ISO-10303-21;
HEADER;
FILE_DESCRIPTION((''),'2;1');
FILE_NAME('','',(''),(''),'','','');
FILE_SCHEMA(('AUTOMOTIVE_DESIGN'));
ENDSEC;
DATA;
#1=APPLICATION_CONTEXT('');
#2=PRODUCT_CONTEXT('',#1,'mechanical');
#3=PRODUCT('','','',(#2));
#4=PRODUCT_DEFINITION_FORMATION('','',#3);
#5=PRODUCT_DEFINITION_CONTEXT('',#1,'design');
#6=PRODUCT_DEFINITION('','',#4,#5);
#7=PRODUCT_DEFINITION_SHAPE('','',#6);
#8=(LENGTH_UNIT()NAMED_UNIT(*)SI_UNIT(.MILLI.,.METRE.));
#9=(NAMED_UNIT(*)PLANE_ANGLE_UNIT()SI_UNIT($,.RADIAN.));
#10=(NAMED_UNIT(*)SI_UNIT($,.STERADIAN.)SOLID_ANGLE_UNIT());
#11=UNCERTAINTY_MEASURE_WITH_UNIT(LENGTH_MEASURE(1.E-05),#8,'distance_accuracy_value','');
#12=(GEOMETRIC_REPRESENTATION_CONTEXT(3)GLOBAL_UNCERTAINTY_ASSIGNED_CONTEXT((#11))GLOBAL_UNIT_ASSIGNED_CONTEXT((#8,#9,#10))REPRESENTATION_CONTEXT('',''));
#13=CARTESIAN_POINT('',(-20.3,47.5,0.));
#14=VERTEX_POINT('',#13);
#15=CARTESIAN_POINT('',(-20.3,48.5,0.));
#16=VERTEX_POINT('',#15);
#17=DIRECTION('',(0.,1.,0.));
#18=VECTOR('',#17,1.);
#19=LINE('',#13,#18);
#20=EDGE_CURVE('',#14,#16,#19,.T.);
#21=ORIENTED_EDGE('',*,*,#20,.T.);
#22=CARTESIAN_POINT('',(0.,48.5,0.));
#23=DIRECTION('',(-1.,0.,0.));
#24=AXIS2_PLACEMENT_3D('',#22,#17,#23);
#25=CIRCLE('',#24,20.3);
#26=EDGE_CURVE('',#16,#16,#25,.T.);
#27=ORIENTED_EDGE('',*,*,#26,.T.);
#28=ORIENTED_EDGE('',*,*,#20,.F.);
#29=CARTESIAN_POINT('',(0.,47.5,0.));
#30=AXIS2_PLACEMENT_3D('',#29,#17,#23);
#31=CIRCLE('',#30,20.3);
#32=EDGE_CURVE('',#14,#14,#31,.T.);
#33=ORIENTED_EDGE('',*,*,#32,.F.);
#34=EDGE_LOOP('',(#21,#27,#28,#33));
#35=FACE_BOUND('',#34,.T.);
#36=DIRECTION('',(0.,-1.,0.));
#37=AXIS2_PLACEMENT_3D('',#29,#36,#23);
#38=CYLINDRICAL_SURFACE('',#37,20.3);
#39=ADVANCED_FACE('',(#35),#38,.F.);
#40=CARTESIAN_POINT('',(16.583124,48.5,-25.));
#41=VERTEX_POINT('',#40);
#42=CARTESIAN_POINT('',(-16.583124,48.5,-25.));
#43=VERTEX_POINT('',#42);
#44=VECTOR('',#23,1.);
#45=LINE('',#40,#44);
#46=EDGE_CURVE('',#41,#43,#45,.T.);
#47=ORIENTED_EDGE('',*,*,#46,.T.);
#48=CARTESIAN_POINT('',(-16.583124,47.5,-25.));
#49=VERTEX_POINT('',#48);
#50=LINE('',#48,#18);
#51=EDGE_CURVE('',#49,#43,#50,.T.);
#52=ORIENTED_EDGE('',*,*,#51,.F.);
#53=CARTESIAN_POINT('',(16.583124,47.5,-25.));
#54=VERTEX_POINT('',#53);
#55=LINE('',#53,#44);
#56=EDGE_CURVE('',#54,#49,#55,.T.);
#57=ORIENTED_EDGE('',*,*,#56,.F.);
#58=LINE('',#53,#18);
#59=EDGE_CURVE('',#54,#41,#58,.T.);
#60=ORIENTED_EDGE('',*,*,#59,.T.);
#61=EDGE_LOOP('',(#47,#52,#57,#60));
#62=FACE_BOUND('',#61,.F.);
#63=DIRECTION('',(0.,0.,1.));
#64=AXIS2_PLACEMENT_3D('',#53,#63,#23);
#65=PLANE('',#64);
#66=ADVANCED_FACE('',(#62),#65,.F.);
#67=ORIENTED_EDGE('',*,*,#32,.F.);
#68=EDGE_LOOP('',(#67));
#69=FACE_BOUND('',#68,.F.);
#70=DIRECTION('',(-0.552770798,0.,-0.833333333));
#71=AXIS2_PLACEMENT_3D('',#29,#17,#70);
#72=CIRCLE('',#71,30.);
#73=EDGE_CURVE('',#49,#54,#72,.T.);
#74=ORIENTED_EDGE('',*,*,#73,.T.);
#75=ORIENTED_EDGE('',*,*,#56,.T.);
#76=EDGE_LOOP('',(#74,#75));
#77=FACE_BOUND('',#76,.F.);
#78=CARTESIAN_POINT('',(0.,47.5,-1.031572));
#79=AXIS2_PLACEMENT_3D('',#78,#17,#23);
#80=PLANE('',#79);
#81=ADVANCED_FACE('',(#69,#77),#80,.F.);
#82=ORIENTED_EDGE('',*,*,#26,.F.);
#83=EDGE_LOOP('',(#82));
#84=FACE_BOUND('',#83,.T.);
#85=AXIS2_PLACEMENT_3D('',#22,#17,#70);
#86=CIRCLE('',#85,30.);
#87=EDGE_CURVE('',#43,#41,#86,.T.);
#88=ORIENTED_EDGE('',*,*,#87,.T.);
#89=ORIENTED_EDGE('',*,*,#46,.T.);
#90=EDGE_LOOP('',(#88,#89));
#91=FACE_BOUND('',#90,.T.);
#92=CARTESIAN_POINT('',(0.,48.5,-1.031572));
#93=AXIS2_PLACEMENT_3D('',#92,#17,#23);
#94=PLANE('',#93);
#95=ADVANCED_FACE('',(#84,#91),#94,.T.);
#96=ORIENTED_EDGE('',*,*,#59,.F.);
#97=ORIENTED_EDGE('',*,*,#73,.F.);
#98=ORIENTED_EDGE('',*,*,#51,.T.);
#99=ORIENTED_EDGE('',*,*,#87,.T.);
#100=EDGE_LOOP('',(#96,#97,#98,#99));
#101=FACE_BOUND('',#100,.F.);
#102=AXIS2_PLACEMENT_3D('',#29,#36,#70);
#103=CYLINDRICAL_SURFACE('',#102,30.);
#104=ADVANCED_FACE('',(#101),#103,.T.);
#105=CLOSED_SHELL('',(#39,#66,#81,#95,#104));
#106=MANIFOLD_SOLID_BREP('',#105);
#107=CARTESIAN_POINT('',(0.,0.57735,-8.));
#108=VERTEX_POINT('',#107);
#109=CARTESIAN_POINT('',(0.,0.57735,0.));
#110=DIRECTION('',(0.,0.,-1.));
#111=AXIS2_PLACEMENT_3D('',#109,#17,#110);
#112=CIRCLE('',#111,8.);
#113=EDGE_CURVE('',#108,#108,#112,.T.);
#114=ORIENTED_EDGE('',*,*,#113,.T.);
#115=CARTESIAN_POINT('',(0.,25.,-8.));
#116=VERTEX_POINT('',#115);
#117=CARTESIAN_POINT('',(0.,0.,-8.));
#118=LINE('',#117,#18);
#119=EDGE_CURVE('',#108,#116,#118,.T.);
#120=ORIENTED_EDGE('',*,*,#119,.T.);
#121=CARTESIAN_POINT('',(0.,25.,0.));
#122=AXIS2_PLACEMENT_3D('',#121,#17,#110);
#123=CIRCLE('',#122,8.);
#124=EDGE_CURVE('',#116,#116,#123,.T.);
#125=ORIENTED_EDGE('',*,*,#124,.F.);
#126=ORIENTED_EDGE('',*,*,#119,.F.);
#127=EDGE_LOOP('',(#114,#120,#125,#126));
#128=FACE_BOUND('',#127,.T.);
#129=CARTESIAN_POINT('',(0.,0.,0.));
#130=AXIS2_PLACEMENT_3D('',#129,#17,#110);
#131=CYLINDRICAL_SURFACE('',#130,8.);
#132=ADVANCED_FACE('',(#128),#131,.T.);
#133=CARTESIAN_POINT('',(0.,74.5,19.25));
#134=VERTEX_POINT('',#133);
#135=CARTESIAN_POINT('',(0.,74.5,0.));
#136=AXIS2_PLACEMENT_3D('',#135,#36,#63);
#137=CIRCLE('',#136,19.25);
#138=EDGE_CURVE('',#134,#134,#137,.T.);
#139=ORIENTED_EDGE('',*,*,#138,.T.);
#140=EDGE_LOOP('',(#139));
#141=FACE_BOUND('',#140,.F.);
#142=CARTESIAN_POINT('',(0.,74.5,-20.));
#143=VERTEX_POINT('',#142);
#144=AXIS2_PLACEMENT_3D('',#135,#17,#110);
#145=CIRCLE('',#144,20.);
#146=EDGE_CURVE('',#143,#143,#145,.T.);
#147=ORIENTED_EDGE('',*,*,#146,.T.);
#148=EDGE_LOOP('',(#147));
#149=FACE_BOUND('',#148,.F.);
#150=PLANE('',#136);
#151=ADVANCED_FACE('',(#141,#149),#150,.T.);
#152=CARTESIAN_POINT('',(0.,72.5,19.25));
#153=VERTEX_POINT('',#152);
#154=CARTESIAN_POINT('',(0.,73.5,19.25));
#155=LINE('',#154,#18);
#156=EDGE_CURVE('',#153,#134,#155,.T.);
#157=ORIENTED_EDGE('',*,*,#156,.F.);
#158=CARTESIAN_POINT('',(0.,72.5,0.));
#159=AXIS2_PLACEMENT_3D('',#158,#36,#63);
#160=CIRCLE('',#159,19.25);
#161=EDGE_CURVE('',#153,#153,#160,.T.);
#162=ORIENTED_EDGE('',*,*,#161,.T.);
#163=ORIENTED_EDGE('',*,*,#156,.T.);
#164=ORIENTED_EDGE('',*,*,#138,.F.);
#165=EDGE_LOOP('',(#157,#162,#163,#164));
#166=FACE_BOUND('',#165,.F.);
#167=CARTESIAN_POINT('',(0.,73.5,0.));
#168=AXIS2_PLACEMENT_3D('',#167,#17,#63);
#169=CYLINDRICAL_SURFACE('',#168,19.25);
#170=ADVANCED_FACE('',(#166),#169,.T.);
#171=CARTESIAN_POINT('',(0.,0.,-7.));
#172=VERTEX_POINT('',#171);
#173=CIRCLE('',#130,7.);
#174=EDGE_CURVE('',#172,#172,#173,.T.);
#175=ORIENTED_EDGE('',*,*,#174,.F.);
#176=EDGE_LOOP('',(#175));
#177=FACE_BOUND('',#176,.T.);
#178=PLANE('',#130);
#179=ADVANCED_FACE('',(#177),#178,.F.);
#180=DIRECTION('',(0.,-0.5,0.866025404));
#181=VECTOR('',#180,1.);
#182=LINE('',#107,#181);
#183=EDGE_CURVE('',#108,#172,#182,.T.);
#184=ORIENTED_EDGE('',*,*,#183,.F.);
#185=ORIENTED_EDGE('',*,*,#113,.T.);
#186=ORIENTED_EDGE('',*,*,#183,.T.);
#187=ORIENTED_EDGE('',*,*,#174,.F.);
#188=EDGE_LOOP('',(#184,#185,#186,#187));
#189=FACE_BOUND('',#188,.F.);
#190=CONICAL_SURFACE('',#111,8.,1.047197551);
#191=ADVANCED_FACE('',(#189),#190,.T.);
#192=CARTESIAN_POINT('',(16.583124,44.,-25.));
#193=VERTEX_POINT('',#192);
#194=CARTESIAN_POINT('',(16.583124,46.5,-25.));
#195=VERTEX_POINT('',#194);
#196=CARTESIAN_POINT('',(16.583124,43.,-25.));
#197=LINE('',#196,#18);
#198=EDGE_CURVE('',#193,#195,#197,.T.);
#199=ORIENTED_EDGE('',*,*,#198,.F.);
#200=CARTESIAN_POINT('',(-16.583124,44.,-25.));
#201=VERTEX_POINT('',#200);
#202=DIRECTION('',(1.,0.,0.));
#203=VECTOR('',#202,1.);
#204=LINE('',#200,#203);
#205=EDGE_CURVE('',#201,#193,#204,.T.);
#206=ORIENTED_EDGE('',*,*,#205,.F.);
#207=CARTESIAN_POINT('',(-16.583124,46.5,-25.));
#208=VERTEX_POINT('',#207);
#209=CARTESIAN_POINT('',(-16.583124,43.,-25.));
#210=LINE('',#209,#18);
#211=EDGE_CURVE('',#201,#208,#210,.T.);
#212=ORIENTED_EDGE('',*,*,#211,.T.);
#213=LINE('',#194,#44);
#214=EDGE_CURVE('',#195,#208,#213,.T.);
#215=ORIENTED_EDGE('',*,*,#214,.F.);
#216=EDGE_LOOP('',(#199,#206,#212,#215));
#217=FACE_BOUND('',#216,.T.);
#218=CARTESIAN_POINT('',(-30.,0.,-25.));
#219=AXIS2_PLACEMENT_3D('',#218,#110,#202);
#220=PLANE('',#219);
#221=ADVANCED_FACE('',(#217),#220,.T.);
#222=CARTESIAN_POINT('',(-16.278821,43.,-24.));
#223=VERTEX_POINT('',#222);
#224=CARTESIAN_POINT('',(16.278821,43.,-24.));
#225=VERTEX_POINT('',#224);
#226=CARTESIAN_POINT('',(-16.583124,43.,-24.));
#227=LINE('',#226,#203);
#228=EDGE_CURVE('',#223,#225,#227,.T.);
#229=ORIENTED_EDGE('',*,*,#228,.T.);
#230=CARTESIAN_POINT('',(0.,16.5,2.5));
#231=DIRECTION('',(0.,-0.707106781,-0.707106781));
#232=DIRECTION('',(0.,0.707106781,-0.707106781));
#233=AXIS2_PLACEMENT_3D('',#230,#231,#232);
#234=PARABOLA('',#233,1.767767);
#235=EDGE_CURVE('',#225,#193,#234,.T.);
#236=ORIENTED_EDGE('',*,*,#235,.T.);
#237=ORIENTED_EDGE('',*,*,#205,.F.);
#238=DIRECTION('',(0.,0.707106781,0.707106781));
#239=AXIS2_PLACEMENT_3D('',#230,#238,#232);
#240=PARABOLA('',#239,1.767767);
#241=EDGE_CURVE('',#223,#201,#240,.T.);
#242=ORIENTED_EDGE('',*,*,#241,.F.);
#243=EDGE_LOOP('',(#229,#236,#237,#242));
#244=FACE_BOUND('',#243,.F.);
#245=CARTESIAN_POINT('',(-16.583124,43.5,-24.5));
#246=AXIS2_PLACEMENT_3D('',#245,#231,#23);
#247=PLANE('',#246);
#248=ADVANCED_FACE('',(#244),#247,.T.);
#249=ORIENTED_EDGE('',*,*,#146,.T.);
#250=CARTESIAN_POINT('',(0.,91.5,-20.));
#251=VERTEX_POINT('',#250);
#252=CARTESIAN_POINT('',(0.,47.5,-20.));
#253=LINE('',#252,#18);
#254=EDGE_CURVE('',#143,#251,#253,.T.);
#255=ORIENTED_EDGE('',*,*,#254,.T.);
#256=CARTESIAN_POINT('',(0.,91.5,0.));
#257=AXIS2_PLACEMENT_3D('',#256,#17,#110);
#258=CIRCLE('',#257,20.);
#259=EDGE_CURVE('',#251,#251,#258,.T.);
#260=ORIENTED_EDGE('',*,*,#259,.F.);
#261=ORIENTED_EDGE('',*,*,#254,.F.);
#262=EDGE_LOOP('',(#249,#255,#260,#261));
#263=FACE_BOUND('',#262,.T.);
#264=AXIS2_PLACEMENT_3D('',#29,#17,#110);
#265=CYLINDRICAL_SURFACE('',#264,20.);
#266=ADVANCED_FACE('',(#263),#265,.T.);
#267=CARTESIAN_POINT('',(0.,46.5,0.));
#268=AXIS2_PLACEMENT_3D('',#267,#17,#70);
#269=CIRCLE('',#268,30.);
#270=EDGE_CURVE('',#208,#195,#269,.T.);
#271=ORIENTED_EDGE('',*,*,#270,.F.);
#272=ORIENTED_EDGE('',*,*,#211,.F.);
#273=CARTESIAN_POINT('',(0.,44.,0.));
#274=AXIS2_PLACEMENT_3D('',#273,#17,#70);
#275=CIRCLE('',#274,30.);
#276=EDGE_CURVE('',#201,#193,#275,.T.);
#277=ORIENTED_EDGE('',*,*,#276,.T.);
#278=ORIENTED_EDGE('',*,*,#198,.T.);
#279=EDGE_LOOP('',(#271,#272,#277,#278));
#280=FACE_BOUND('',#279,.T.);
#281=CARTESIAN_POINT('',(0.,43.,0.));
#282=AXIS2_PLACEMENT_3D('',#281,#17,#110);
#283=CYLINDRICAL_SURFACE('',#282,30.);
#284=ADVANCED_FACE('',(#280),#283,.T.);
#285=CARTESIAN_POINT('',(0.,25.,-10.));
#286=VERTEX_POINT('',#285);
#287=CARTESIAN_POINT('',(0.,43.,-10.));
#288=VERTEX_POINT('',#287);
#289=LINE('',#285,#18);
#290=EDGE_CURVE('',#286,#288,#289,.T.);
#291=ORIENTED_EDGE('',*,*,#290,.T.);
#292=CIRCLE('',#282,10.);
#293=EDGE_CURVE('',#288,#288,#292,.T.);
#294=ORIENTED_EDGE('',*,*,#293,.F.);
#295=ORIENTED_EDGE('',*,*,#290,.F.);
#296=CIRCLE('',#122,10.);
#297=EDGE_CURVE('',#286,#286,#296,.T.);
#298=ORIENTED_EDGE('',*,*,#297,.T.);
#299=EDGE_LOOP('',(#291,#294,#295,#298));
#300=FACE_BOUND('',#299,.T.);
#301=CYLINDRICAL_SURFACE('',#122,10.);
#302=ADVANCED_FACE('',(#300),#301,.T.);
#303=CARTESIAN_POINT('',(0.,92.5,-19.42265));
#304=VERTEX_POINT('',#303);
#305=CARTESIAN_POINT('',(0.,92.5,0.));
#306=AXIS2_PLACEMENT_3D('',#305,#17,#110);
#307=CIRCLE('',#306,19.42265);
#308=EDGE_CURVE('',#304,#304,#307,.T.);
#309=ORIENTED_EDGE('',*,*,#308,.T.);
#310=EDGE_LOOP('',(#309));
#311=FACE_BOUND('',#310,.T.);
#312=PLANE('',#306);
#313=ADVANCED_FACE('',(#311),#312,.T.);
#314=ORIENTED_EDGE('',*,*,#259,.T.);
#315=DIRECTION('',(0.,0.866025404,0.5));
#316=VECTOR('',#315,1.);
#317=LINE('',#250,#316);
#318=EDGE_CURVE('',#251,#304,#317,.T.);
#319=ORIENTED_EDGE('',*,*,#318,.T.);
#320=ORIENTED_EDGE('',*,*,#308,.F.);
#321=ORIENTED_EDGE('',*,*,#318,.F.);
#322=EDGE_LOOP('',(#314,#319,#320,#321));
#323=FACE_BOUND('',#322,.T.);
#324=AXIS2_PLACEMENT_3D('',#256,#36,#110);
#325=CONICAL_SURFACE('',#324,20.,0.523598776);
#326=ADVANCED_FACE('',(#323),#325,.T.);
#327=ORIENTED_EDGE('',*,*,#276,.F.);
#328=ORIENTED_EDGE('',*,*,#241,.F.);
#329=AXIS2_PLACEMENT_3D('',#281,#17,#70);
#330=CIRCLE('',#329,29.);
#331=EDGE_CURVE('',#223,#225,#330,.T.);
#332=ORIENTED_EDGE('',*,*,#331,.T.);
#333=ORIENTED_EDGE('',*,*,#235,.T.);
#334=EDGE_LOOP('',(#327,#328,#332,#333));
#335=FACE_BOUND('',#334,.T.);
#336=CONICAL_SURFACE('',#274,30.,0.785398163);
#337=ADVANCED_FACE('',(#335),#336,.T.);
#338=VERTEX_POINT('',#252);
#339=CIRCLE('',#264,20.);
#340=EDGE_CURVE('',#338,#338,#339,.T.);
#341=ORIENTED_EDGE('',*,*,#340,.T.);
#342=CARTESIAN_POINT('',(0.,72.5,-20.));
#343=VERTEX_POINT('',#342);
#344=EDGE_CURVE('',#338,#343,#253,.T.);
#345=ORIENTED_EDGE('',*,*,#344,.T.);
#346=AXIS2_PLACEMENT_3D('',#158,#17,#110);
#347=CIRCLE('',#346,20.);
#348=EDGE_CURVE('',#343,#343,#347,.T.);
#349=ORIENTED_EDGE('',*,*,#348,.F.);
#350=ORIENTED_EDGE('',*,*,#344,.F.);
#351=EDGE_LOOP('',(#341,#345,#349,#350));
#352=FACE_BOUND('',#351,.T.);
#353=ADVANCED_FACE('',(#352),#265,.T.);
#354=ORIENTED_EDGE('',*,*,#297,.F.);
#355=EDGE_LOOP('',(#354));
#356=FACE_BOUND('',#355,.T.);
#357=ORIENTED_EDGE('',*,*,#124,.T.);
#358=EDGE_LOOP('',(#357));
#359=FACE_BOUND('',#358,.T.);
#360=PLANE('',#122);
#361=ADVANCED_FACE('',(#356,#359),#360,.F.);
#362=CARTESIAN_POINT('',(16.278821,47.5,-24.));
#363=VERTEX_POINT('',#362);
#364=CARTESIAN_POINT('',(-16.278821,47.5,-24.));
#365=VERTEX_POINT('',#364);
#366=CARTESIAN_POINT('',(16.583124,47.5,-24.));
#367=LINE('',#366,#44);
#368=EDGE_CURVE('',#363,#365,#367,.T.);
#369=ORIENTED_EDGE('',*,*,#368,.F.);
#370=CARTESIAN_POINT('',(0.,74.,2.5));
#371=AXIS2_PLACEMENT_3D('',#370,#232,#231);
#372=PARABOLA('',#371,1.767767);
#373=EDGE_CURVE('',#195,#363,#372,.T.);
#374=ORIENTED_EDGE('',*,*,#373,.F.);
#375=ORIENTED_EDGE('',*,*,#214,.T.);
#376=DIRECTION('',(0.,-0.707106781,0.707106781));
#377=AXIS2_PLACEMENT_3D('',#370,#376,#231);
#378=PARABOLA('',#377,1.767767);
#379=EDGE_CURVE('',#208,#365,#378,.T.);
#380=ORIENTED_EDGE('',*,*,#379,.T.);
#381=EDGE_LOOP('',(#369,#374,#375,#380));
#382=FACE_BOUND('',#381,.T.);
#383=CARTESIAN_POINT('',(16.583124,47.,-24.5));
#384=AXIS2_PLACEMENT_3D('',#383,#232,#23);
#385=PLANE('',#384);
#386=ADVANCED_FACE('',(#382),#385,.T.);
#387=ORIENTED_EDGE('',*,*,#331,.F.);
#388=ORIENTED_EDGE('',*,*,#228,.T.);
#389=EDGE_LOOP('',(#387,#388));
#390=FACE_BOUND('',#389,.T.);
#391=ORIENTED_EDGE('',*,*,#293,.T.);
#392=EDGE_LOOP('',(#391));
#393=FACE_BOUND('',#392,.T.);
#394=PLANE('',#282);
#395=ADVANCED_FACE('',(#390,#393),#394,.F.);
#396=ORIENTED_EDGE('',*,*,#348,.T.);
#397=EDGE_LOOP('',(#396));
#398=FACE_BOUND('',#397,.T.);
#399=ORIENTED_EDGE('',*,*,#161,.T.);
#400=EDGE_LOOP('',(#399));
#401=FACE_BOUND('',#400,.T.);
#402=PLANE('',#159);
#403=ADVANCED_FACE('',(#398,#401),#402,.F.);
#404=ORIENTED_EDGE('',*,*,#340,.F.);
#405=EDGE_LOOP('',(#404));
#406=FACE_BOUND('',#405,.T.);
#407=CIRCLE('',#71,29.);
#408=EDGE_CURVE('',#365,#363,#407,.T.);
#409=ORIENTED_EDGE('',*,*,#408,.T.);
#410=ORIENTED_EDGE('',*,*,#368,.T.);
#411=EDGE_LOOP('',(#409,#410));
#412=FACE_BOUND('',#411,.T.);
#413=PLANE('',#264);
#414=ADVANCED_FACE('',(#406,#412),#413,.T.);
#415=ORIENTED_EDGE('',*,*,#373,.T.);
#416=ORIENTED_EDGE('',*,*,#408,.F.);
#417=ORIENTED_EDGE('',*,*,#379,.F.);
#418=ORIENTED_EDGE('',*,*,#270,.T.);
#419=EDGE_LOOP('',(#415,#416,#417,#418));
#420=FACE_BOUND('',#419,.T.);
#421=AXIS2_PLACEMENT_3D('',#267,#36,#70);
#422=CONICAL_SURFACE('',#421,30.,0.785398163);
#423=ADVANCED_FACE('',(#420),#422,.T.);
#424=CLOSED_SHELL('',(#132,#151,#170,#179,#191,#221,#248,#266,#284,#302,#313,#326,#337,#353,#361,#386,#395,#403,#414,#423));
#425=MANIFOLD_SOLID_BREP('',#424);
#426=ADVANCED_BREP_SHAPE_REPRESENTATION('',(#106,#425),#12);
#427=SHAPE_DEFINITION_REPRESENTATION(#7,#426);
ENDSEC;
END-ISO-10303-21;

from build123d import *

# Parameters (mm, degrees)
F2_W        = 60
F2_H        = 10
F3_DEPTH    = 92.501
F4_SIZE     = 1
F5_C1_SIZE2 = 1
F5_C1_SIZE  = 0.5773502692
F5_C2_SIZE2 = 0.5773502692
F5_C2_SIZE  = 1
F6_W        = 2
F6_H        = 2
F8_R        = 20.3
F9_DEPTH    = 1


with BuildPart() as f1:
    # F0 (on Right) → F1 (revolve)
    with BuildSketch(Plane.YZ):
        Polygon((92.5, 0), (0, 0), (0, -8), (25, -8), (25, -10), (43, -10), (43, -30), (47.5, -30), (47.5, -20), (92.5, -20), align=None)
    revolve(axis=Axis((0, 37.7989597619, 0), (0, 1, 0)))

    # F2 (on Front) → F3 (cut, through all)
    with BuildSketch(Plane.XZ):
        with Locations((0, -30)):
            Rectangle(F2_W, F2_H)
    extrude(amount=-F3_DEPTH, mode=Mode.SUBTRACT)

    # F4
    f4_edges = [f1.edges().sort_by_distance(p)[0] for p in [
        (0, 47.5, 30),
        (0, 47.5, -25),
        (0, 43, 30),
        (0, 43, -25),
    ]]
    chamfer(f4_edges, length=F4_SIZE)

    # F5: chamfer of 1 x 0.5773502692 on 2 edges, made by hand

    # F5_c1
    f5_c1_edges = [f1.edges().sort_by_distance(p)[0] for p in [
        (0, 0, 8),
    ]]
    f5_c1_side = f1.faces().sort_by_distance((0, 0.0115470054, 8))[0]
    chamfer(f5_c1_edges, length=F5_C1_SIZE, length2=F5_C1_SIZE2, reference=f5_c1_side)

    # F5_c2
    f5_c2_edges = [f1.edges().sort_by_distance(p)[0] for p in [
        (0, 92.5, 20),
    ]]
    f5_c2_side = f1.faces().sort_by_distance((0, 92.4884529946, 20))[0]
    chamfer(f5_c2_edges, length=F5_C2_SIZE, length2=F5_C2_SIZE2, reference=f5_c2_side)

    # F6 (on Right) → F7 (revolve, cut)
    with BuildSketch(Plane.YZ):
        with Locations((73.5, 20.25)):
            Rectangle(F6_W, F6_H)
    revolve(axis=Axis((0, 66.5382612497, 0), (0, -1, 0)), mode=Mode.SUBTRACT)


with BuildPart() as f9:
    # F8 (on face) → F9 (new body)
    with BuildSketch(Plane(origin=(0, 47.5, 0), x_dir=(-1, 0, 0), z_dir=(0, 1, 0))):
        with BuildLine():
            ThreePointArc((16.5831239518, -25), (0, 30), (-16.5831239518, -25))
            Line((-16.5831239518, -25), (16.5831239518, -25))
        make_face()
        Circle(F8_R, mode=Mode.SUBTRACT)
    extrude(amount=F9_DEPTH)


solid = Compound([f1.part, f9.part])
